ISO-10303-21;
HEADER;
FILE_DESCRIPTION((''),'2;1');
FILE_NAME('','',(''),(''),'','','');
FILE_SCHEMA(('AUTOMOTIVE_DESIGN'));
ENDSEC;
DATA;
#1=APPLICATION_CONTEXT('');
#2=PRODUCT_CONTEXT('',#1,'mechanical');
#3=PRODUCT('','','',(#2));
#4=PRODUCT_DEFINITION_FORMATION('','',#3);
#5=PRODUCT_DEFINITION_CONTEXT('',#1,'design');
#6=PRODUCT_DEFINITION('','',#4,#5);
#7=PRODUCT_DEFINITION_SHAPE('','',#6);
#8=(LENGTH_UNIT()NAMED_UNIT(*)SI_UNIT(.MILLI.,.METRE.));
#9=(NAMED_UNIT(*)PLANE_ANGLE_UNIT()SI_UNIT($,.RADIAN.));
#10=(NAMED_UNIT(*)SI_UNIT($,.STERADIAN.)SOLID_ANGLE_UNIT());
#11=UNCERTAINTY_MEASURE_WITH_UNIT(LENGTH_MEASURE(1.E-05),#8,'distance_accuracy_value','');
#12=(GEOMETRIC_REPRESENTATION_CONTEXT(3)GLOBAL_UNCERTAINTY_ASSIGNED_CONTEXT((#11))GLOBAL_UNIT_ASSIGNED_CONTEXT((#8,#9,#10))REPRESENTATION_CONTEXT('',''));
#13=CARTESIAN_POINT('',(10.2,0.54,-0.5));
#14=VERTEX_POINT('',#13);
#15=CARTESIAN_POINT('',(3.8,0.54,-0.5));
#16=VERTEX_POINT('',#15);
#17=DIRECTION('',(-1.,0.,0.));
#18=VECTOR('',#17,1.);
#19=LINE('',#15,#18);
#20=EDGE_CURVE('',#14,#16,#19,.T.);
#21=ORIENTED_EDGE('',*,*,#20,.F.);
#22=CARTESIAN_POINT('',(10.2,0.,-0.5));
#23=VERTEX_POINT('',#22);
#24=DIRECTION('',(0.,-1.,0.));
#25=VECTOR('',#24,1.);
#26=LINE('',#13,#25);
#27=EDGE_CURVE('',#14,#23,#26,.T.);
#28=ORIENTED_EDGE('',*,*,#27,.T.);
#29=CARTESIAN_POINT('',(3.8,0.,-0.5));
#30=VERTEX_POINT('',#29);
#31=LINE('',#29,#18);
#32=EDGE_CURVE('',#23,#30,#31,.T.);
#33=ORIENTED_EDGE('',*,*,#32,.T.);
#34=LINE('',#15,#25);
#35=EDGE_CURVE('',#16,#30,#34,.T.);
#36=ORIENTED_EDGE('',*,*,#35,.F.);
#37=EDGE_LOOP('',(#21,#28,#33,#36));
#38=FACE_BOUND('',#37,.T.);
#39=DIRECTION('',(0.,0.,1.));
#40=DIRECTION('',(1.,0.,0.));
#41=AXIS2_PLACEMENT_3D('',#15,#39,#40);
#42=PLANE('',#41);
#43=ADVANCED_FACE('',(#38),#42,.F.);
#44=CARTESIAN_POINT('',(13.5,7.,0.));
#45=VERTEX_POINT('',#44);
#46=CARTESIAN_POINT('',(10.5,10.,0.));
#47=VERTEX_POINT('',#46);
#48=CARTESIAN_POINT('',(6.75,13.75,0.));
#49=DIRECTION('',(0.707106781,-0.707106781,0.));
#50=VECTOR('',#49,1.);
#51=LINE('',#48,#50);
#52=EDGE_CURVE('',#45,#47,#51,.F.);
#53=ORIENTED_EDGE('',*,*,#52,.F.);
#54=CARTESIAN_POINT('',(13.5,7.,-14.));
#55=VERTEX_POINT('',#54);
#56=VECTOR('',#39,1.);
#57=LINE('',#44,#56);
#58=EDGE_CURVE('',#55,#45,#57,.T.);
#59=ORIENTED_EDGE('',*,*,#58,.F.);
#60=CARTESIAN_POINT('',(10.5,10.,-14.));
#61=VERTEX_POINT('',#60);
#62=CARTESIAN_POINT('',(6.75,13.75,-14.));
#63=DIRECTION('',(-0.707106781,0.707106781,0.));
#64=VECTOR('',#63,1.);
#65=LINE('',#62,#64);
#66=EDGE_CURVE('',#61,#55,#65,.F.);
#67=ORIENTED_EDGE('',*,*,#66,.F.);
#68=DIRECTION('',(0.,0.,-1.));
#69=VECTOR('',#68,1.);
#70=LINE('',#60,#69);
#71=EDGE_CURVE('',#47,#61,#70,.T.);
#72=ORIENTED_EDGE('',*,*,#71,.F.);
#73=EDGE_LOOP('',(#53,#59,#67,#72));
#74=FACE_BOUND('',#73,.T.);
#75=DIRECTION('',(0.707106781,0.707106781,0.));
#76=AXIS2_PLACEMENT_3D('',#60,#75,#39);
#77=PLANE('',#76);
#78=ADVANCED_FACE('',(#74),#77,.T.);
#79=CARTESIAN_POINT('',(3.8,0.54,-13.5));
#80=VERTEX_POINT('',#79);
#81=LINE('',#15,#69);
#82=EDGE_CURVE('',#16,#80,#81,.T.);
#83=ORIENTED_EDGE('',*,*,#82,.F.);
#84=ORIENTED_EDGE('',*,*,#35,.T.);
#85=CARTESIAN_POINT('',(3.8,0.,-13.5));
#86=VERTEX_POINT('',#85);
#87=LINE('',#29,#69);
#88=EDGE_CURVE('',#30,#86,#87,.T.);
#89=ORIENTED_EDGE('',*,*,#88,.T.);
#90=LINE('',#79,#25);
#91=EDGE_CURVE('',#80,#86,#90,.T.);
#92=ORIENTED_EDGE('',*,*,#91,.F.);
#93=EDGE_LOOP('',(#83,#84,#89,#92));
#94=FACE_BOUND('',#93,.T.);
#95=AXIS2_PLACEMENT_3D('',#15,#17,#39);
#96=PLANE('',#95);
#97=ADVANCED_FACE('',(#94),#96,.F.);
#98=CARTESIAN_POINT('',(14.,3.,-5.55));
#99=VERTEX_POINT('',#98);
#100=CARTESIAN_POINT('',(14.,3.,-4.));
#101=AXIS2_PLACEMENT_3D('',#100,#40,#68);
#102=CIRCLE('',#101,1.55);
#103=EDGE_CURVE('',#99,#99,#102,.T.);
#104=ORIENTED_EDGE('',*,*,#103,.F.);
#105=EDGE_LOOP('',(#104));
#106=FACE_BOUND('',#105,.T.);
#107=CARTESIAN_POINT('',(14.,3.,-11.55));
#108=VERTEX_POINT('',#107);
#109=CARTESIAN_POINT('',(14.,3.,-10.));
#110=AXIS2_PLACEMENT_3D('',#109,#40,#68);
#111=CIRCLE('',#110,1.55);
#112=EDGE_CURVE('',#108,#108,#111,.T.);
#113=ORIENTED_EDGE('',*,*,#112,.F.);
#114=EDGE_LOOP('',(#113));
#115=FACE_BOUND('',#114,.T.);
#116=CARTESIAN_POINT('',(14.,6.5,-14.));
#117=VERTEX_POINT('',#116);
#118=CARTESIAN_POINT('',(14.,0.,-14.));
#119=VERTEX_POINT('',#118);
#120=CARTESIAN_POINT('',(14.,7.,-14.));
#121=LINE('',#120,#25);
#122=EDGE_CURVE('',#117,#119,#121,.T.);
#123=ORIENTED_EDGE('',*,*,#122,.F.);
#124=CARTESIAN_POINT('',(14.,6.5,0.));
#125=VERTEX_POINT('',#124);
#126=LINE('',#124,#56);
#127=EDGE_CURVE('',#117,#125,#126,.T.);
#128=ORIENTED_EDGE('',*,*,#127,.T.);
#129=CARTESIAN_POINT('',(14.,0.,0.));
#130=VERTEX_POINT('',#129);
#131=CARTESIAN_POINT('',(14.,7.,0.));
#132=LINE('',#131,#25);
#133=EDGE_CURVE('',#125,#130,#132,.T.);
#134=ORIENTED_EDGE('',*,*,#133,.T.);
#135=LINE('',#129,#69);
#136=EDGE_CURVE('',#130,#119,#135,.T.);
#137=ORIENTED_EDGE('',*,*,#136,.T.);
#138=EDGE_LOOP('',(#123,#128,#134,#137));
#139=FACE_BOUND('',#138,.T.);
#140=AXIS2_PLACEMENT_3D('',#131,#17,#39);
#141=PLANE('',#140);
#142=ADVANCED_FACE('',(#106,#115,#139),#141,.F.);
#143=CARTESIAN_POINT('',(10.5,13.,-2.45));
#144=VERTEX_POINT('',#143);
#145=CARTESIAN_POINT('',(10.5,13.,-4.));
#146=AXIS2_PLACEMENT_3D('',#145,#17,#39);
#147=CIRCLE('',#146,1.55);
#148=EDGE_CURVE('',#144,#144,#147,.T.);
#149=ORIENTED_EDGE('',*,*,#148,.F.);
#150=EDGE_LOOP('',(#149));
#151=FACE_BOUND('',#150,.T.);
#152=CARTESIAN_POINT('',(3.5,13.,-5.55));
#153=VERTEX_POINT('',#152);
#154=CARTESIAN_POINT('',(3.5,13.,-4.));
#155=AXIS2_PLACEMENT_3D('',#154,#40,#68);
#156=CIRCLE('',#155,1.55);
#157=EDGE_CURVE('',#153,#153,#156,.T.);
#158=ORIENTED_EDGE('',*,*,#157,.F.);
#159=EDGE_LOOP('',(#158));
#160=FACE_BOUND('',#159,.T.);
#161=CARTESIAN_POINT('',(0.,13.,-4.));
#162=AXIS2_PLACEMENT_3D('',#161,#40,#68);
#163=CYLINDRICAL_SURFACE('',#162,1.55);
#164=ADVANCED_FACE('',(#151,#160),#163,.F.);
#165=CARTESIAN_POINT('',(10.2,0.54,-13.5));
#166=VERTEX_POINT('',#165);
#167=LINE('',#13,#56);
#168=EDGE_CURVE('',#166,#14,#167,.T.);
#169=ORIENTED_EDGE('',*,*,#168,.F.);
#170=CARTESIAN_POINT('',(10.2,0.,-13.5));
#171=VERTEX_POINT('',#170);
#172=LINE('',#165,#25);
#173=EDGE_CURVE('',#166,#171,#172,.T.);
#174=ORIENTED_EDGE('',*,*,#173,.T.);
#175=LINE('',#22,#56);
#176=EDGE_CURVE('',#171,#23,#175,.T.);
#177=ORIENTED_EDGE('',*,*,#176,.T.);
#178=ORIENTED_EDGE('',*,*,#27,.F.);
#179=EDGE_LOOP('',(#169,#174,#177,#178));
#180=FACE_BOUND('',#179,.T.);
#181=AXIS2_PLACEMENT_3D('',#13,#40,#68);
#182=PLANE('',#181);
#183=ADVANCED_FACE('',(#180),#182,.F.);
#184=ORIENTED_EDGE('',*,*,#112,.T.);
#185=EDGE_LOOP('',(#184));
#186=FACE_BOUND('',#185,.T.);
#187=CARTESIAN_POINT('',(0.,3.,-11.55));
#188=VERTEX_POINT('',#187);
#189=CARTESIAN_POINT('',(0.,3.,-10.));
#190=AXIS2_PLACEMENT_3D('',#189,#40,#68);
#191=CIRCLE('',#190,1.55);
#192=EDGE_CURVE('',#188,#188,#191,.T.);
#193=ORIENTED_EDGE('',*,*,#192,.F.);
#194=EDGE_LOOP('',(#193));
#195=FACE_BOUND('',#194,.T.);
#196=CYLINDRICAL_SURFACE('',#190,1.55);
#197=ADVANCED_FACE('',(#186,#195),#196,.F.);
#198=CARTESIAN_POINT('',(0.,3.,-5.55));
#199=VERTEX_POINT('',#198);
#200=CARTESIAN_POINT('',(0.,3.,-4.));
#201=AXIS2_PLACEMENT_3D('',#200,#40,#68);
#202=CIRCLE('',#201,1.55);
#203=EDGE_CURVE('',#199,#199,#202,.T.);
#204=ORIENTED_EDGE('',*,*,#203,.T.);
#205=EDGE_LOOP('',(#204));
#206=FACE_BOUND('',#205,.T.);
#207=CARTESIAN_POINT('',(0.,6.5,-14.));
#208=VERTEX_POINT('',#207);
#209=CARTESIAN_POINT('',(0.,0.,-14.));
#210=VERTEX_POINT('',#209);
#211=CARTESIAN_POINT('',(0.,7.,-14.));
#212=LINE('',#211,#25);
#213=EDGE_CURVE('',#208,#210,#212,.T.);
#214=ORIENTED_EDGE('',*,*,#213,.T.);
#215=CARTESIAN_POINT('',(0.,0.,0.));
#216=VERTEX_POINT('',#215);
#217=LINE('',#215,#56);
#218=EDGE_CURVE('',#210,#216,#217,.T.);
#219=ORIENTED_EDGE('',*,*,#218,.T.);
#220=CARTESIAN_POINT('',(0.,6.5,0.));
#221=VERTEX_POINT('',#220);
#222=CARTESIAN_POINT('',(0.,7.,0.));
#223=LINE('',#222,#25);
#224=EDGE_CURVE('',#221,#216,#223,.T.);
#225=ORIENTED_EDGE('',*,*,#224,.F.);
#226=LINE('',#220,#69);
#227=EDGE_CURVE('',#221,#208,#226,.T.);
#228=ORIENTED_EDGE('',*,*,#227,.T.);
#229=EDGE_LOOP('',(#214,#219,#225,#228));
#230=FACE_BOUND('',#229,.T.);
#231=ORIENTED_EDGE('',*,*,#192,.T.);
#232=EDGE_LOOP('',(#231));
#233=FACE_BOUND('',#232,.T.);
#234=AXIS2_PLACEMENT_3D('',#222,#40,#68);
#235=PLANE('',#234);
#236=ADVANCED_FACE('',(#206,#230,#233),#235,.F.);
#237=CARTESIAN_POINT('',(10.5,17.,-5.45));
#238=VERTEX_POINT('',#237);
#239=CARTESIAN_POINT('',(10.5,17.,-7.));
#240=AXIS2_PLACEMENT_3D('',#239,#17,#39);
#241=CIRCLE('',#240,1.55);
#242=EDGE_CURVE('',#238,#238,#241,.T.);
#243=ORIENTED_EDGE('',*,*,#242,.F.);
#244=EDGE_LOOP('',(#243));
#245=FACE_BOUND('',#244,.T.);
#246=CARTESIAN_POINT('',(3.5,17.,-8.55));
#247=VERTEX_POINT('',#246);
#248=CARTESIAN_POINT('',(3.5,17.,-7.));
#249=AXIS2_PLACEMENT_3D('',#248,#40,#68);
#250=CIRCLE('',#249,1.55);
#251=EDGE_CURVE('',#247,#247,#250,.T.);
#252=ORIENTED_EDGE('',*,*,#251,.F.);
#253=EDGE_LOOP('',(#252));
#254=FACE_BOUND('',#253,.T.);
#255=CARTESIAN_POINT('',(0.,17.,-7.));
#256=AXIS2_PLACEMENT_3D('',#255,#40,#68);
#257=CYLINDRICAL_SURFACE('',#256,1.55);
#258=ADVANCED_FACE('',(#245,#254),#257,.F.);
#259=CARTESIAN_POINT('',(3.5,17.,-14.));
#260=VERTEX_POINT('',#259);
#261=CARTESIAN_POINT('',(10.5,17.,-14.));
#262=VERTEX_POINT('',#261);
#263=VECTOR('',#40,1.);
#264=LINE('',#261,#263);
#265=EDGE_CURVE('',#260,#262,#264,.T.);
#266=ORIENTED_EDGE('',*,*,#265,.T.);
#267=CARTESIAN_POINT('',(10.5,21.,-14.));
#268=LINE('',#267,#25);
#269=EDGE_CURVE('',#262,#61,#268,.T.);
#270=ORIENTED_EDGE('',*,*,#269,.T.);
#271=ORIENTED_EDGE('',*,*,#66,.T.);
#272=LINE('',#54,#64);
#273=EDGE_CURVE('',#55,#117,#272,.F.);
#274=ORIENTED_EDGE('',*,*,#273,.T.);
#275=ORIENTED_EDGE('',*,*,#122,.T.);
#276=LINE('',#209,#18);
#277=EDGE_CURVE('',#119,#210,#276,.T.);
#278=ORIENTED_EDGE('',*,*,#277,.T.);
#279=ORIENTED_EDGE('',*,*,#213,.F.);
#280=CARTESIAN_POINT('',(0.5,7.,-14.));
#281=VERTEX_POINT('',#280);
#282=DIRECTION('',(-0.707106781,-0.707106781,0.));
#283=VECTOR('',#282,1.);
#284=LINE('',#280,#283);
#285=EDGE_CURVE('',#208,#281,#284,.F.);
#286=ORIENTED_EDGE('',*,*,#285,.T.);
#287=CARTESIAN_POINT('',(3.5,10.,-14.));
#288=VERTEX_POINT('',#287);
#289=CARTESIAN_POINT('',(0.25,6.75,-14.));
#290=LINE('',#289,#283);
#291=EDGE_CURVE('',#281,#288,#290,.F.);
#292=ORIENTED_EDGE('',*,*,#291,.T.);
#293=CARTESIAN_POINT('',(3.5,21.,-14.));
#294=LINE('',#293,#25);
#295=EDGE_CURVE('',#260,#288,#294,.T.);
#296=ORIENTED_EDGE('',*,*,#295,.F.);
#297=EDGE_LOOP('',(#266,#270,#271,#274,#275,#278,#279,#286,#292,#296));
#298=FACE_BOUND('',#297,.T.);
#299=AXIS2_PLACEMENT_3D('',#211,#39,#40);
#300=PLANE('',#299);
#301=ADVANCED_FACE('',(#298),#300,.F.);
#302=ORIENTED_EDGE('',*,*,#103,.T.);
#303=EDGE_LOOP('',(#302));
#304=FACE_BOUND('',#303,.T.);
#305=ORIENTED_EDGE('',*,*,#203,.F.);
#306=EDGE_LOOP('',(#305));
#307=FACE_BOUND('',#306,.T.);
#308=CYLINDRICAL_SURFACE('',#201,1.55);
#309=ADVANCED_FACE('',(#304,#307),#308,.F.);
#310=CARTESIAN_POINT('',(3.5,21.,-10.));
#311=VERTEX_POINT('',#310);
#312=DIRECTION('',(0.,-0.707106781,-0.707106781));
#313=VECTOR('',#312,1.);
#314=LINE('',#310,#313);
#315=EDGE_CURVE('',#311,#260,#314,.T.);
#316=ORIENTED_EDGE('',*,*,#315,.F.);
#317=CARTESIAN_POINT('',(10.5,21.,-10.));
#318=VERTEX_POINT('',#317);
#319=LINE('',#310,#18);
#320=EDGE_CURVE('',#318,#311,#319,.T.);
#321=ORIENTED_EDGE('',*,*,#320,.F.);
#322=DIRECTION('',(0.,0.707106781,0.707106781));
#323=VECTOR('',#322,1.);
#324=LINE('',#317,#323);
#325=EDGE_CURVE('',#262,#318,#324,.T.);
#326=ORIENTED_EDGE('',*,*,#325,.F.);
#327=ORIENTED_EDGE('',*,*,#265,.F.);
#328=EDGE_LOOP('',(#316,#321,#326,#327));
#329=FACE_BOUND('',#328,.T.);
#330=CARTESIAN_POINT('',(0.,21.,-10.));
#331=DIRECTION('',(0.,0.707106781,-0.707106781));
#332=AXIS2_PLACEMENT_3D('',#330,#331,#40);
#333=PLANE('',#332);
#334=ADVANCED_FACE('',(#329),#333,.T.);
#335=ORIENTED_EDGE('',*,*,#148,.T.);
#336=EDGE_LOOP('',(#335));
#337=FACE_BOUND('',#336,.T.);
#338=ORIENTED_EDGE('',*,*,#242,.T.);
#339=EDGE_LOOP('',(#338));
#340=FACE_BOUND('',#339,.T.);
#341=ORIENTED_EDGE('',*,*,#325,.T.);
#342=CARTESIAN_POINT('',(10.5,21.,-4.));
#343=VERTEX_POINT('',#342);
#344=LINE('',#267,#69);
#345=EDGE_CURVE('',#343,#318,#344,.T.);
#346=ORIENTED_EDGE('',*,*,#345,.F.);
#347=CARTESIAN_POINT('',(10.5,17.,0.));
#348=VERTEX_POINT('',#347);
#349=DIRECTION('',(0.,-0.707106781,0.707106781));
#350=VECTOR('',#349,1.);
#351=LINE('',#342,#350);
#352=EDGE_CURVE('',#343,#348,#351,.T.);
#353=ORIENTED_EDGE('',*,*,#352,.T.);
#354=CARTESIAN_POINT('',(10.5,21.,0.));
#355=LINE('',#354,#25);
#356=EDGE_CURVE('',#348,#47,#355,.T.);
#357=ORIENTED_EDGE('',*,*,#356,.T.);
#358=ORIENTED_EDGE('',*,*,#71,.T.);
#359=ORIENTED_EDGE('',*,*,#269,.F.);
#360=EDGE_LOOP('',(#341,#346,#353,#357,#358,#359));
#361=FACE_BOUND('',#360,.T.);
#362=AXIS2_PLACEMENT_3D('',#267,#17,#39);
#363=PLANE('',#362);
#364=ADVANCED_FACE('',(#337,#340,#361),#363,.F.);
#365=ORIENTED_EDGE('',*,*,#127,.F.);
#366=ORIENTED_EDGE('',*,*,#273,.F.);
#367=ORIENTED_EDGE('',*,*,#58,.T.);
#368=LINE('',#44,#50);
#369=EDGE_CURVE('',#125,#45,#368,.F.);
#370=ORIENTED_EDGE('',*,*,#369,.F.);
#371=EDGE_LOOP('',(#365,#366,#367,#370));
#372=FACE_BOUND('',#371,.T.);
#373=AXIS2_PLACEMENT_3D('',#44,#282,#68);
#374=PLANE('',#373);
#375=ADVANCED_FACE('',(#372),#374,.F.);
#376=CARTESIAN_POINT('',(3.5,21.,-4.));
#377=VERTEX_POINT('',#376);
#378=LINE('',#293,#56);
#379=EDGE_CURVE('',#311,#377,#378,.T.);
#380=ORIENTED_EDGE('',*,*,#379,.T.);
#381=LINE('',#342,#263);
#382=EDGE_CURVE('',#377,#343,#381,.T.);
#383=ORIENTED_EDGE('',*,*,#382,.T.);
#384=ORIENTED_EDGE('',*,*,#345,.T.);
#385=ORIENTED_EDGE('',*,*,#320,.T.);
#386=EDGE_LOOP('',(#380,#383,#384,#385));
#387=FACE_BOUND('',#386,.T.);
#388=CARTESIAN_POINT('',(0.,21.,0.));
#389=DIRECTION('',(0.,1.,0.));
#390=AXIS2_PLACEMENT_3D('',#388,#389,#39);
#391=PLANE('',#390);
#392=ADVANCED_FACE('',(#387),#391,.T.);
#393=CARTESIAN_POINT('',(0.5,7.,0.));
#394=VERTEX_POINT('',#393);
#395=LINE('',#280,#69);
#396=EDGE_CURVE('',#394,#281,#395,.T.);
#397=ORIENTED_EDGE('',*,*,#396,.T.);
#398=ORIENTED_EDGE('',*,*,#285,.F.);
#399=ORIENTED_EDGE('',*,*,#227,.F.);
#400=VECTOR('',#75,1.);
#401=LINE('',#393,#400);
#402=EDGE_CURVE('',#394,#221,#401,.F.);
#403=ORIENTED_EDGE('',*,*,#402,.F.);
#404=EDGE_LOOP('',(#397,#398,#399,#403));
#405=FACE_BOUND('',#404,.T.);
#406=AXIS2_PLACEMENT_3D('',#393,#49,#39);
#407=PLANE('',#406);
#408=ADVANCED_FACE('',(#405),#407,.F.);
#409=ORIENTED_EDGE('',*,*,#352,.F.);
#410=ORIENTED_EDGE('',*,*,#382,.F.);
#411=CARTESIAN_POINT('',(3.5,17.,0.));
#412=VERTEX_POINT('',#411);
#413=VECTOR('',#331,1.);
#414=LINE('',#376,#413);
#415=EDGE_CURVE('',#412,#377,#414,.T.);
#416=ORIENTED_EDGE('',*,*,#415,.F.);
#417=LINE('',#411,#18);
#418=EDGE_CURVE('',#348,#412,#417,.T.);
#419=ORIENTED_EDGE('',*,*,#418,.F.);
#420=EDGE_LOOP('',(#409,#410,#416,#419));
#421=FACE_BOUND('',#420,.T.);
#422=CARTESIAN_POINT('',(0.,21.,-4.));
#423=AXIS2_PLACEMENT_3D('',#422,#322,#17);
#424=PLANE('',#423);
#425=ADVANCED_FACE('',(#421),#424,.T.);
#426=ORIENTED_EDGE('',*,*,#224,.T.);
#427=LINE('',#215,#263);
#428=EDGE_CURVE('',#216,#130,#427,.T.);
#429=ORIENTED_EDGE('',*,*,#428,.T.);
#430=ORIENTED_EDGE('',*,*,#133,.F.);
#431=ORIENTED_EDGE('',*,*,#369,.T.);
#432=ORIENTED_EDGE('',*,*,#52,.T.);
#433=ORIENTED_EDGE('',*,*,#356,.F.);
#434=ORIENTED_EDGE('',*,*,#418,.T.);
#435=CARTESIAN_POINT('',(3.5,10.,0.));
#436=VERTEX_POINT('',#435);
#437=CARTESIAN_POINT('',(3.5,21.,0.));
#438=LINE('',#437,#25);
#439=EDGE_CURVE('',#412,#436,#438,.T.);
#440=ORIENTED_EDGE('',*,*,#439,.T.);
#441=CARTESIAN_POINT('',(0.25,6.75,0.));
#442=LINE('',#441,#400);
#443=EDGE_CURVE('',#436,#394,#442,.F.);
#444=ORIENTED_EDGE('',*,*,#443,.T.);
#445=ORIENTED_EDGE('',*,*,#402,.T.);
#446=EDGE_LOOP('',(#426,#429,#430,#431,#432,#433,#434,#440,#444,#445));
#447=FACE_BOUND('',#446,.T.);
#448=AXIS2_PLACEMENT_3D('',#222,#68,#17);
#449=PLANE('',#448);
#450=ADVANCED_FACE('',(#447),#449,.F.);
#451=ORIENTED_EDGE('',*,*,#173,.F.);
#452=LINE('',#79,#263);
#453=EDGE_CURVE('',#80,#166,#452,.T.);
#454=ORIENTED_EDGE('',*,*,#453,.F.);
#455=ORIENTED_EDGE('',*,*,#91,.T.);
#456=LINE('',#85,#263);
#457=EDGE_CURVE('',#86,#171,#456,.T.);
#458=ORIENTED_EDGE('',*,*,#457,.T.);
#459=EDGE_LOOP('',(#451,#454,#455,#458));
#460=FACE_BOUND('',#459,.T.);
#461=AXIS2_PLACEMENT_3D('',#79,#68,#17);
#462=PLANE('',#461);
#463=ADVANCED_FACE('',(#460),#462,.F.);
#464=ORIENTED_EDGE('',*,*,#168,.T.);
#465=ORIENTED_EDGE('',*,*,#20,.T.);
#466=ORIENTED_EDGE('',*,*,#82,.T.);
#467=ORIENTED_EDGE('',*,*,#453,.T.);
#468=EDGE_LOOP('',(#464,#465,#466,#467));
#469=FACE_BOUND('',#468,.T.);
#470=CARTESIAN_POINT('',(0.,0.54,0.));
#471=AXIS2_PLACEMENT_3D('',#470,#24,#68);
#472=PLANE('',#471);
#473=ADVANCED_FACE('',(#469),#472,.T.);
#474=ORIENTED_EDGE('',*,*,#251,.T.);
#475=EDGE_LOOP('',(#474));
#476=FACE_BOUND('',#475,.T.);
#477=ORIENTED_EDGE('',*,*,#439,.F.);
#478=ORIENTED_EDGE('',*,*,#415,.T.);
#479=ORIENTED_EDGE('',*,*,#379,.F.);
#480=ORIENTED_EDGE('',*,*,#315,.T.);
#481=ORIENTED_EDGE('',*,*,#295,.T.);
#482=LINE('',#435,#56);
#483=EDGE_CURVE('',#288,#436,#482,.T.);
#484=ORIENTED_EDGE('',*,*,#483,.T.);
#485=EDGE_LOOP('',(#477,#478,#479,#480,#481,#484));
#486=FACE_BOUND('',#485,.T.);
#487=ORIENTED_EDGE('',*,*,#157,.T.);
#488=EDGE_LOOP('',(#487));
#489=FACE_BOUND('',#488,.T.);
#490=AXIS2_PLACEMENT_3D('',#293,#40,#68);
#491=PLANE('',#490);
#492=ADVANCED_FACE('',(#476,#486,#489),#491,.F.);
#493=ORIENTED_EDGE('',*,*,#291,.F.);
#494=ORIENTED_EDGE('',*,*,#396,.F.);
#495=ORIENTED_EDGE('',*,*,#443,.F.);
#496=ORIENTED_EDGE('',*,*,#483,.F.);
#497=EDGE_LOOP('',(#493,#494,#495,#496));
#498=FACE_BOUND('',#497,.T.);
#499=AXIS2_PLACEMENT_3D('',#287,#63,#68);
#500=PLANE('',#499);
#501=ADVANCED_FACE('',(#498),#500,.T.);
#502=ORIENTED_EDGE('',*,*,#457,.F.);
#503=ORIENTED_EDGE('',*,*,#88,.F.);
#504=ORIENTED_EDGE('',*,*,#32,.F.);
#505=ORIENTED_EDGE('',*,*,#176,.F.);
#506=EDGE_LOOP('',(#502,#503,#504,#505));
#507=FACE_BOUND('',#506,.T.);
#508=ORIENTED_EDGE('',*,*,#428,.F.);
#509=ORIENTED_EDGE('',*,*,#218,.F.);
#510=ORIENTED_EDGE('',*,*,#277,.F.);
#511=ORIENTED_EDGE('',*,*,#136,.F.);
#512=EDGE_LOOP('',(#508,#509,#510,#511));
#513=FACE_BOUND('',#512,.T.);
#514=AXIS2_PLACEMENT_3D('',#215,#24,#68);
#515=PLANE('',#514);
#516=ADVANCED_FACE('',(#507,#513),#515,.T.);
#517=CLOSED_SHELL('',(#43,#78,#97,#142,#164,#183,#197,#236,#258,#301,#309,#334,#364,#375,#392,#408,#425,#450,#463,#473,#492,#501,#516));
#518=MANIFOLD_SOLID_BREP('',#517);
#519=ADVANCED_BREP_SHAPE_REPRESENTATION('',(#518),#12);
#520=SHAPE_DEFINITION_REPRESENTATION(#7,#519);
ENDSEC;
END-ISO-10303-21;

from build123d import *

# Parameters (mm, degrees)
SKETCH1_W               = 14
SKETCH1_H               = 14
BOSS_EXTRUDE1_DEPTH     = 7
SKETCH2_W               = 7
SKETCH2_H               = 14
BOSS_EXTRUDE2_DEPTH     = 14
CHAMFER1_SIZE           = 3
CHAMFER2_SIZE           = 0.5
CHAMFER3_SIZE           = 4
CUT_EXTRUDE1_DEPTH      = 28.335873866
CUT_EXTRUDE1_DEPTH_BACK = 28.335873866
SKETCH3_R               = 1.55
SKETCH5_W               = 6.4
SKETCH5_H               = 13
CUT_EXTRUDE2_DEPTH      = 0.54


with BuildPart() as part:
    # Sketch1 → Boss-Extrude1 (new body)
    with BuildSketch(Plane(origin=(0, 0, 0), x_dir=(1, 0, 0), z_dir=(0, 1, 0))):
        with Locations((7, 7)):
            Rectangle(SKETCH1_W, SKETCH1_H)
    extrude(amount=BOSS_EXTRUDE1_DEPTH)

    # Sketch2 → Boss-Extrude2 (add)
    with BuildSketch(Plane(origin=(0, 7, 0), x_dir=(1, 0, 0), z_dir=(0, 1, 0))):
        with Locations((7, 7)):
            Rectangle(SKETCH2_W, SKETCH2_H)
    extrude(amount=BOSS_EXTRUDE2_DEPTH)

    # Chamfer1
    chamfer1_edges = [part.edges().sort_by_distance(p)[0] for p in [
        (3.5, 7, -7),
        (10.5, 7, -7),
    ]]
    chamfer(chamfer1_edges, length=CHAMFER1_SIZE)

    # Chamfer2
    chamfer2_edges = [part.edges().sort_by_distance(p)[0] for p in [
        (0, 7, -7),
        (14, 7, -7),
    ]]
    chamfer(chamfer2_edges, length=CHAMFER2_SIZE - 0.0001)  # a hair under: the kernel refuses the full size

    # Chamfer3
    chamfer3_edges = [part.edges().sort_by_distance(p)[0] for p in [
        (7, 21, 0),
        (7, 21, -14),
    ]]
    chamfer(chamfer3_edges, length=CHAMFER3_SIZE)

    # Sketch3 → Cut-Extrude1 (cut, two sides: drawn at the far end of the back side and taken through both)
    with BuildSketch(Plane(origin=(10.5, 0, 0), x_dir=(0, 0, -1), z_dir=(1, 0, 0)).offset(-CUT_EXTRUDE1_DEPTH_BACK)):
        with Locations((7, 17)):
            Circle(SKETCH3_R)
        with Locations((4, 13)):
            Circle(SKETCH3_R)
        with Locations((4, 3)):
            Circle(SKETCH3_R)
        with Locations((10, 3)):
            Circle(SKETCH3_R)
    extrude(amount=CUT_EXTRUDE1_DEPTH + CUT_EXTRUDE1_DEPTH_BACK, mode=Mode.SUBTRACT)

    # Sketch5 → Cut-Extrude2 (cut)
    with BuildSketch(Plane.XZ):
        with Locations((7, -7)):
            Rectangle(SKETCH5_W, SKETCH5_H)
    extrude(amount=-CUT_EXTRUDE2_DEPTH, mode=Mode.SUBTRACT)


solid = part.part
